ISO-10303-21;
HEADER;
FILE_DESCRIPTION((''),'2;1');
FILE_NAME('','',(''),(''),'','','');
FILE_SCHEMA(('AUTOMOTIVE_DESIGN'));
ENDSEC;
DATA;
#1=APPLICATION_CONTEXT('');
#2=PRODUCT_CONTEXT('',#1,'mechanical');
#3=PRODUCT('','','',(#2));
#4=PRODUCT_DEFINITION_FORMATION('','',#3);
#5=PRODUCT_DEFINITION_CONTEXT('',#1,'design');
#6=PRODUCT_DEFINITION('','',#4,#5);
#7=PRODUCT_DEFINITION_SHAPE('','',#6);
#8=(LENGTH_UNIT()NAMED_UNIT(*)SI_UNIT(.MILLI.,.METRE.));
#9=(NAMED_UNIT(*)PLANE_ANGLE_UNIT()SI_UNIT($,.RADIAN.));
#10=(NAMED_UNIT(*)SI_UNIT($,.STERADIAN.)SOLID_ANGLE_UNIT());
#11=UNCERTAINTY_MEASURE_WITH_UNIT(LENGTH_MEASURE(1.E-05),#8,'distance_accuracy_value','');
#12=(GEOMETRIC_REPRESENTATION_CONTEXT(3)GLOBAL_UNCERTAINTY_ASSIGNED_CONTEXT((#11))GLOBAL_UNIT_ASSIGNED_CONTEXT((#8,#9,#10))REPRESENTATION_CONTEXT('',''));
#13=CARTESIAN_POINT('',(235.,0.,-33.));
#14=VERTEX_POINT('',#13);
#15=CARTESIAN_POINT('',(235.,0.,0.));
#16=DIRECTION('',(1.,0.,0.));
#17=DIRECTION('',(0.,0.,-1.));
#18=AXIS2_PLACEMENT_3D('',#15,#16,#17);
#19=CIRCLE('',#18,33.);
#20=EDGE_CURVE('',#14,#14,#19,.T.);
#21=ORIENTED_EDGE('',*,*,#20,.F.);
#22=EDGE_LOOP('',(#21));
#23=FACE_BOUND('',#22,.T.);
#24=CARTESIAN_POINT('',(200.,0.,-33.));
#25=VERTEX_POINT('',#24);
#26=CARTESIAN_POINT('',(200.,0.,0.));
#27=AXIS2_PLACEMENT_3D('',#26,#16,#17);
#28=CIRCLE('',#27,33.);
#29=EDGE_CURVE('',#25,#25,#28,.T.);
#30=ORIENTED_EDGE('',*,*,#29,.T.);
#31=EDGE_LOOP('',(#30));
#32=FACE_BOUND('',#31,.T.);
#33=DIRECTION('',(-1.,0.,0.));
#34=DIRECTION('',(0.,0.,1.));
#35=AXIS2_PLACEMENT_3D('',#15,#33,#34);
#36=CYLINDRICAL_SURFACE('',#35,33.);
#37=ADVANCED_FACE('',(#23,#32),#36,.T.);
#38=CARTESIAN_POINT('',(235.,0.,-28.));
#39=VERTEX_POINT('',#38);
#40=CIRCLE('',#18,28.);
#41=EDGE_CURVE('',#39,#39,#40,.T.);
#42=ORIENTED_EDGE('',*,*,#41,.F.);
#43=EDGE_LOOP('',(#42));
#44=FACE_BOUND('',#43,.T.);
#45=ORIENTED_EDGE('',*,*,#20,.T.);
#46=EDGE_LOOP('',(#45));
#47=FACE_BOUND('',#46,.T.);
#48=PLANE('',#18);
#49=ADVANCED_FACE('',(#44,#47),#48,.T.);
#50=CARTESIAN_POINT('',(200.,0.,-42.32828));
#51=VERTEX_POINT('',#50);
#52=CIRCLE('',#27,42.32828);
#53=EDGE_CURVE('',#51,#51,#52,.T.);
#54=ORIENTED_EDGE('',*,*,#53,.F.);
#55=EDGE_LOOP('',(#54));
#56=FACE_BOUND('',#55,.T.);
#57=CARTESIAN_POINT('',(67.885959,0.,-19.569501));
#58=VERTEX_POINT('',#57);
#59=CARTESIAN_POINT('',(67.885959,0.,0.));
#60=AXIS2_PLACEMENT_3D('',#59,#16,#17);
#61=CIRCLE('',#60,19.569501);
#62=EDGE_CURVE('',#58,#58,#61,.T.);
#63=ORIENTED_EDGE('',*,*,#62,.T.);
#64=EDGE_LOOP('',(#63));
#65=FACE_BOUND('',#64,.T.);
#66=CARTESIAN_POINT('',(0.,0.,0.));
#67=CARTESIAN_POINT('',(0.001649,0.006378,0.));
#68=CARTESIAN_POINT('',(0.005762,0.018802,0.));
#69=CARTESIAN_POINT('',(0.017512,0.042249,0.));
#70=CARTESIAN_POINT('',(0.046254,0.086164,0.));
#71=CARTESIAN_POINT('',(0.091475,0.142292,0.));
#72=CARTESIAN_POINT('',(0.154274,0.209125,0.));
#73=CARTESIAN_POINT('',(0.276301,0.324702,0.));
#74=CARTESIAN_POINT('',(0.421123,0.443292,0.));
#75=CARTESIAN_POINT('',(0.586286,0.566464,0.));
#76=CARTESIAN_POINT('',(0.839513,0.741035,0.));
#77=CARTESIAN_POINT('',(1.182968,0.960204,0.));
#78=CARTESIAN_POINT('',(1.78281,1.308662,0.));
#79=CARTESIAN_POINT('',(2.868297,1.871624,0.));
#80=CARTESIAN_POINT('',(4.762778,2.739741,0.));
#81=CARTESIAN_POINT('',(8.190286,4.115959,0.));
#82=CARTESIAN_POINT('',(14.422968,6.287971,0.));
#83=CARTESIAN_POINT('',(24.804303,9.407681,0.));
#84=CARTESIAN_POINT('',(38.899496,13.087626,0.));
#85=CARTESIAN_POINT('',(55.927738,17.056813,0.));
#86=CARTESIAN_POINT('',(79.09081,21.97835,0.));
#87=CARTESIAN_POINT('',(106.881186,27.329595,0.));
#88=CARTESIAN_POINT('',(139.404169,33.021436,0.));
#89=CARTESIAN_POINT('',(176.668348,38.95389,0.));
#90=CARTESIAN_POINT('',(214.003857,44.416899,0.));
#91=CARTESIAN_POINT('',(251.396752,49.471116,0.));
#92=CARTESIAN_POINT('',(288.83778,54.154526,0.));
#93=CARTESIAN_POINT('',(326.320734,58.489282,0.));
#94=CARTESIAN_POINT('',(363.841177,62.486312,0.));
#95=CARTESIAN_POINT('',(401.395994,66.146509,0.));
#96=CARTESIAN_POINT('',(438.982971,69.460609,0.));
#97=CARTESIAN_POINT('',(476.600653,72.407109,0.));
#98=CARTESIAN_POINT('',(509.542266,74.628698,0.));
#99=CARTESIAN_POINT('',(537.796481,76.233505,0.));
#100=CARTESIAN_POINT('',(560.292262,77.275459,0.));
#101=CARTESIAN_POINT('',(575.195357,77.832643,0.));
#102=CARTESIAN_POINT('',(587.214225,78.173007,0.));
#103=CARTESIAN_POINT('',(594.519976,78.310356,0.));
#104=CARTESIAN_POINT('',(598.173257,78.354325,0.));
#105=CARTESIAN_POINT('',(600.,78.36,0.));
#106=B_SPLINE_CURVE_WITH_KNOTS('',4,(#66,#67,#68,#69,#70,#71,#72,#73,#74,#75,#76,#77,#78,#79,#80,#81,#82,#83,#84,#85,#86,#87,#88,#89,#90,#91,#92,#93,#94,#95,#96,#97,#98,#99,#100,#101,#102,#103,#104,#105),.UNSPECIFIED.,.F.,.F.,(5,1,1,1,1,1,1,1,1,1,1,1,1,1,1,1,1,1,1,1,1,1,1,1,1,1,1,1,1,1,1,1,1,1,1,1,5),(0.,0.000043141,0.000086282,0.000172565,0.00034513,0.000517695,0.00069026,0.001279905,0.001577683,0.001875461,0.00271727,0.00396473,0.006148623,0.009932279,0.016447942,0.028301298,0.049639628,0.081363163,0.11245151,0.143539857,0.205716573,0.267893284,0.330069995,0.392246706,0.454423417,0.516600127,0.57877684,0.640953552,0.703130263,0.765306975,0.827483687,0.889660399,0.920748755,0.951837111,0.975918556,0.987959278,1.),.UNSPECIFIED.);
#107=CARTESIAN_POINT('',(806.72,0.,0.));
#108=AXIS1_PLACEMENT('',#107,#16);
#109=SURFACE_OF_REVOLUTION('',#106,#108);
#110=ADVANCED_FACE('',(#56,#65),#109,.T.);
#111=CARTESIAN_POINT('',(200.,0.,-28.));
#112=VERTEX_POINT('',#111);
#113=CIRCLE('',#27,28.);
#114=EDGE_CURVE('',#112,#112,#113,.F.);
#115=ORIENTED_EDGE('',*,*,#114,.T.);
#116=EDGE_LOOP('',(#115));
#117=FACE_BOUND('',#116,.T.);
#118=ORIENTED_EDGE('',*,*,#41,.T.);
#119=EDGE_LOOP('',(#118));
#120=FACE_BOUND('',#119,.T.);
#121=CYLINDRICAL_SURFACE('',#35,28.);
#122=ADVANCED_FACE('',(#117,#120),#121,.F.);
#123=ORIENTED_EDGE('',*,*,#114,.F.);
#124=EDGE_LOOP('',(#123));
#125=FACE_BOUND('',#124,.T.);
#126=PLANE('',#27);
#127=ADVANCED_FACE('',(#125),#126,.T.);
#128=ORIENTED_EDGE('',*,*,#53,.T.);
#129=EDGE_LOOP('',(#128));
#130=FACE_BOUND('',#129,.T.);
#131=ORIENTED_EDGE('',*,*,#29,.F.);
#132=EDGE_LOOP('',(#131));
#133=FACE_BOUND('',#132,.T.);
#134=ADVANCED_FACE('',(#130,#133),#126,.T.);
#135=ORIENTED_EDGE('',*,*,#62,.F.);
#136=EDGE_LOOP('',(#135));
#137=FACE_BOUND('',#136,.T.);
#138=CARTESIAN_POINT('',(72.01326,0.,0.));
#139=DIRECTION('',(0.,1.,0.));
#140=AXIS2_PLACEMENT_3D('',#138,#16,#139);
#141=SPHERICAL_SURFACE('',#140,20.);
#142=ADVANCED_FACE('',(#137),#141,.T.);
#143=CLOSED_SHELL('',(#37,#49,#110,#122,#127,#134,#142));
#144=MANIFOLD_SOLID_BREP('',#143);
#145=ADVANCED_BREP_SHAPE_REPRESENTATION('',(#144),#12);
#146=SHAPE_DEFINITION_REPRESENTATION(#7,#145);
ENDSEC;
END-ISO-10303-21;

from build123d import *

# Parameters (mm, degrees)
SKETCH3_R           = 33
SKETCH3_R_2         = 28
BOSS_EXTRUDE1_DEPTH = 35


with BuildPart() as part:
    # Sketch1 → Revolve1 (revolve)
    with BuildSketch(Plane.XY):
        with BuildLine():
            Line((200, 0), (200, 42.32828037))
            add(Edge.make_bspline(
                [(67.88595875, 19.569501359), (71.843085895, 20.404078353), (85.043129663, 23.124182603), (107.543506327, 27.445507457), (139.404169497, 33.021435572), (168.514660807, 37.655823826), (188.335942781, 40.630483181), (198.835243463, 42.159255501), (200, 42.32828037)],
                knots=[0.116883244, 0.116883244, 0.116883244, 0.116883244, 0.116883244, 0.143539857, 0.205716573, 0.267893284, 0.330069995, 0.337827743, 0.337827743, 0.337827743, 0.337827743, 0.337827743], degree=4))
            ThreePointArc((67.88595875, 19.569501359), (56.48029473, 12.598689867), (52.013260114, 0))
            Line((52.013260114, 0), (200, 0))
        make_face()
    revolve(axis=Axis((806.72, 0, 0), (-1, 0, 0)))

    # Sketch3 → Boss-Extrude1 (add)
    with BuildSketch(Plane(origin=(200, 0, 0), x_dir=(0, 0, -1), z_dir=(1, 0, 0))):
        Circle(SKETCH3_R)
        Circle(SKETCH3_R_2, mode=Mode.SUBTRACT)
    extrude(amount=BOSS_EXTRUDE1_DEPTH)


solid = part.part
